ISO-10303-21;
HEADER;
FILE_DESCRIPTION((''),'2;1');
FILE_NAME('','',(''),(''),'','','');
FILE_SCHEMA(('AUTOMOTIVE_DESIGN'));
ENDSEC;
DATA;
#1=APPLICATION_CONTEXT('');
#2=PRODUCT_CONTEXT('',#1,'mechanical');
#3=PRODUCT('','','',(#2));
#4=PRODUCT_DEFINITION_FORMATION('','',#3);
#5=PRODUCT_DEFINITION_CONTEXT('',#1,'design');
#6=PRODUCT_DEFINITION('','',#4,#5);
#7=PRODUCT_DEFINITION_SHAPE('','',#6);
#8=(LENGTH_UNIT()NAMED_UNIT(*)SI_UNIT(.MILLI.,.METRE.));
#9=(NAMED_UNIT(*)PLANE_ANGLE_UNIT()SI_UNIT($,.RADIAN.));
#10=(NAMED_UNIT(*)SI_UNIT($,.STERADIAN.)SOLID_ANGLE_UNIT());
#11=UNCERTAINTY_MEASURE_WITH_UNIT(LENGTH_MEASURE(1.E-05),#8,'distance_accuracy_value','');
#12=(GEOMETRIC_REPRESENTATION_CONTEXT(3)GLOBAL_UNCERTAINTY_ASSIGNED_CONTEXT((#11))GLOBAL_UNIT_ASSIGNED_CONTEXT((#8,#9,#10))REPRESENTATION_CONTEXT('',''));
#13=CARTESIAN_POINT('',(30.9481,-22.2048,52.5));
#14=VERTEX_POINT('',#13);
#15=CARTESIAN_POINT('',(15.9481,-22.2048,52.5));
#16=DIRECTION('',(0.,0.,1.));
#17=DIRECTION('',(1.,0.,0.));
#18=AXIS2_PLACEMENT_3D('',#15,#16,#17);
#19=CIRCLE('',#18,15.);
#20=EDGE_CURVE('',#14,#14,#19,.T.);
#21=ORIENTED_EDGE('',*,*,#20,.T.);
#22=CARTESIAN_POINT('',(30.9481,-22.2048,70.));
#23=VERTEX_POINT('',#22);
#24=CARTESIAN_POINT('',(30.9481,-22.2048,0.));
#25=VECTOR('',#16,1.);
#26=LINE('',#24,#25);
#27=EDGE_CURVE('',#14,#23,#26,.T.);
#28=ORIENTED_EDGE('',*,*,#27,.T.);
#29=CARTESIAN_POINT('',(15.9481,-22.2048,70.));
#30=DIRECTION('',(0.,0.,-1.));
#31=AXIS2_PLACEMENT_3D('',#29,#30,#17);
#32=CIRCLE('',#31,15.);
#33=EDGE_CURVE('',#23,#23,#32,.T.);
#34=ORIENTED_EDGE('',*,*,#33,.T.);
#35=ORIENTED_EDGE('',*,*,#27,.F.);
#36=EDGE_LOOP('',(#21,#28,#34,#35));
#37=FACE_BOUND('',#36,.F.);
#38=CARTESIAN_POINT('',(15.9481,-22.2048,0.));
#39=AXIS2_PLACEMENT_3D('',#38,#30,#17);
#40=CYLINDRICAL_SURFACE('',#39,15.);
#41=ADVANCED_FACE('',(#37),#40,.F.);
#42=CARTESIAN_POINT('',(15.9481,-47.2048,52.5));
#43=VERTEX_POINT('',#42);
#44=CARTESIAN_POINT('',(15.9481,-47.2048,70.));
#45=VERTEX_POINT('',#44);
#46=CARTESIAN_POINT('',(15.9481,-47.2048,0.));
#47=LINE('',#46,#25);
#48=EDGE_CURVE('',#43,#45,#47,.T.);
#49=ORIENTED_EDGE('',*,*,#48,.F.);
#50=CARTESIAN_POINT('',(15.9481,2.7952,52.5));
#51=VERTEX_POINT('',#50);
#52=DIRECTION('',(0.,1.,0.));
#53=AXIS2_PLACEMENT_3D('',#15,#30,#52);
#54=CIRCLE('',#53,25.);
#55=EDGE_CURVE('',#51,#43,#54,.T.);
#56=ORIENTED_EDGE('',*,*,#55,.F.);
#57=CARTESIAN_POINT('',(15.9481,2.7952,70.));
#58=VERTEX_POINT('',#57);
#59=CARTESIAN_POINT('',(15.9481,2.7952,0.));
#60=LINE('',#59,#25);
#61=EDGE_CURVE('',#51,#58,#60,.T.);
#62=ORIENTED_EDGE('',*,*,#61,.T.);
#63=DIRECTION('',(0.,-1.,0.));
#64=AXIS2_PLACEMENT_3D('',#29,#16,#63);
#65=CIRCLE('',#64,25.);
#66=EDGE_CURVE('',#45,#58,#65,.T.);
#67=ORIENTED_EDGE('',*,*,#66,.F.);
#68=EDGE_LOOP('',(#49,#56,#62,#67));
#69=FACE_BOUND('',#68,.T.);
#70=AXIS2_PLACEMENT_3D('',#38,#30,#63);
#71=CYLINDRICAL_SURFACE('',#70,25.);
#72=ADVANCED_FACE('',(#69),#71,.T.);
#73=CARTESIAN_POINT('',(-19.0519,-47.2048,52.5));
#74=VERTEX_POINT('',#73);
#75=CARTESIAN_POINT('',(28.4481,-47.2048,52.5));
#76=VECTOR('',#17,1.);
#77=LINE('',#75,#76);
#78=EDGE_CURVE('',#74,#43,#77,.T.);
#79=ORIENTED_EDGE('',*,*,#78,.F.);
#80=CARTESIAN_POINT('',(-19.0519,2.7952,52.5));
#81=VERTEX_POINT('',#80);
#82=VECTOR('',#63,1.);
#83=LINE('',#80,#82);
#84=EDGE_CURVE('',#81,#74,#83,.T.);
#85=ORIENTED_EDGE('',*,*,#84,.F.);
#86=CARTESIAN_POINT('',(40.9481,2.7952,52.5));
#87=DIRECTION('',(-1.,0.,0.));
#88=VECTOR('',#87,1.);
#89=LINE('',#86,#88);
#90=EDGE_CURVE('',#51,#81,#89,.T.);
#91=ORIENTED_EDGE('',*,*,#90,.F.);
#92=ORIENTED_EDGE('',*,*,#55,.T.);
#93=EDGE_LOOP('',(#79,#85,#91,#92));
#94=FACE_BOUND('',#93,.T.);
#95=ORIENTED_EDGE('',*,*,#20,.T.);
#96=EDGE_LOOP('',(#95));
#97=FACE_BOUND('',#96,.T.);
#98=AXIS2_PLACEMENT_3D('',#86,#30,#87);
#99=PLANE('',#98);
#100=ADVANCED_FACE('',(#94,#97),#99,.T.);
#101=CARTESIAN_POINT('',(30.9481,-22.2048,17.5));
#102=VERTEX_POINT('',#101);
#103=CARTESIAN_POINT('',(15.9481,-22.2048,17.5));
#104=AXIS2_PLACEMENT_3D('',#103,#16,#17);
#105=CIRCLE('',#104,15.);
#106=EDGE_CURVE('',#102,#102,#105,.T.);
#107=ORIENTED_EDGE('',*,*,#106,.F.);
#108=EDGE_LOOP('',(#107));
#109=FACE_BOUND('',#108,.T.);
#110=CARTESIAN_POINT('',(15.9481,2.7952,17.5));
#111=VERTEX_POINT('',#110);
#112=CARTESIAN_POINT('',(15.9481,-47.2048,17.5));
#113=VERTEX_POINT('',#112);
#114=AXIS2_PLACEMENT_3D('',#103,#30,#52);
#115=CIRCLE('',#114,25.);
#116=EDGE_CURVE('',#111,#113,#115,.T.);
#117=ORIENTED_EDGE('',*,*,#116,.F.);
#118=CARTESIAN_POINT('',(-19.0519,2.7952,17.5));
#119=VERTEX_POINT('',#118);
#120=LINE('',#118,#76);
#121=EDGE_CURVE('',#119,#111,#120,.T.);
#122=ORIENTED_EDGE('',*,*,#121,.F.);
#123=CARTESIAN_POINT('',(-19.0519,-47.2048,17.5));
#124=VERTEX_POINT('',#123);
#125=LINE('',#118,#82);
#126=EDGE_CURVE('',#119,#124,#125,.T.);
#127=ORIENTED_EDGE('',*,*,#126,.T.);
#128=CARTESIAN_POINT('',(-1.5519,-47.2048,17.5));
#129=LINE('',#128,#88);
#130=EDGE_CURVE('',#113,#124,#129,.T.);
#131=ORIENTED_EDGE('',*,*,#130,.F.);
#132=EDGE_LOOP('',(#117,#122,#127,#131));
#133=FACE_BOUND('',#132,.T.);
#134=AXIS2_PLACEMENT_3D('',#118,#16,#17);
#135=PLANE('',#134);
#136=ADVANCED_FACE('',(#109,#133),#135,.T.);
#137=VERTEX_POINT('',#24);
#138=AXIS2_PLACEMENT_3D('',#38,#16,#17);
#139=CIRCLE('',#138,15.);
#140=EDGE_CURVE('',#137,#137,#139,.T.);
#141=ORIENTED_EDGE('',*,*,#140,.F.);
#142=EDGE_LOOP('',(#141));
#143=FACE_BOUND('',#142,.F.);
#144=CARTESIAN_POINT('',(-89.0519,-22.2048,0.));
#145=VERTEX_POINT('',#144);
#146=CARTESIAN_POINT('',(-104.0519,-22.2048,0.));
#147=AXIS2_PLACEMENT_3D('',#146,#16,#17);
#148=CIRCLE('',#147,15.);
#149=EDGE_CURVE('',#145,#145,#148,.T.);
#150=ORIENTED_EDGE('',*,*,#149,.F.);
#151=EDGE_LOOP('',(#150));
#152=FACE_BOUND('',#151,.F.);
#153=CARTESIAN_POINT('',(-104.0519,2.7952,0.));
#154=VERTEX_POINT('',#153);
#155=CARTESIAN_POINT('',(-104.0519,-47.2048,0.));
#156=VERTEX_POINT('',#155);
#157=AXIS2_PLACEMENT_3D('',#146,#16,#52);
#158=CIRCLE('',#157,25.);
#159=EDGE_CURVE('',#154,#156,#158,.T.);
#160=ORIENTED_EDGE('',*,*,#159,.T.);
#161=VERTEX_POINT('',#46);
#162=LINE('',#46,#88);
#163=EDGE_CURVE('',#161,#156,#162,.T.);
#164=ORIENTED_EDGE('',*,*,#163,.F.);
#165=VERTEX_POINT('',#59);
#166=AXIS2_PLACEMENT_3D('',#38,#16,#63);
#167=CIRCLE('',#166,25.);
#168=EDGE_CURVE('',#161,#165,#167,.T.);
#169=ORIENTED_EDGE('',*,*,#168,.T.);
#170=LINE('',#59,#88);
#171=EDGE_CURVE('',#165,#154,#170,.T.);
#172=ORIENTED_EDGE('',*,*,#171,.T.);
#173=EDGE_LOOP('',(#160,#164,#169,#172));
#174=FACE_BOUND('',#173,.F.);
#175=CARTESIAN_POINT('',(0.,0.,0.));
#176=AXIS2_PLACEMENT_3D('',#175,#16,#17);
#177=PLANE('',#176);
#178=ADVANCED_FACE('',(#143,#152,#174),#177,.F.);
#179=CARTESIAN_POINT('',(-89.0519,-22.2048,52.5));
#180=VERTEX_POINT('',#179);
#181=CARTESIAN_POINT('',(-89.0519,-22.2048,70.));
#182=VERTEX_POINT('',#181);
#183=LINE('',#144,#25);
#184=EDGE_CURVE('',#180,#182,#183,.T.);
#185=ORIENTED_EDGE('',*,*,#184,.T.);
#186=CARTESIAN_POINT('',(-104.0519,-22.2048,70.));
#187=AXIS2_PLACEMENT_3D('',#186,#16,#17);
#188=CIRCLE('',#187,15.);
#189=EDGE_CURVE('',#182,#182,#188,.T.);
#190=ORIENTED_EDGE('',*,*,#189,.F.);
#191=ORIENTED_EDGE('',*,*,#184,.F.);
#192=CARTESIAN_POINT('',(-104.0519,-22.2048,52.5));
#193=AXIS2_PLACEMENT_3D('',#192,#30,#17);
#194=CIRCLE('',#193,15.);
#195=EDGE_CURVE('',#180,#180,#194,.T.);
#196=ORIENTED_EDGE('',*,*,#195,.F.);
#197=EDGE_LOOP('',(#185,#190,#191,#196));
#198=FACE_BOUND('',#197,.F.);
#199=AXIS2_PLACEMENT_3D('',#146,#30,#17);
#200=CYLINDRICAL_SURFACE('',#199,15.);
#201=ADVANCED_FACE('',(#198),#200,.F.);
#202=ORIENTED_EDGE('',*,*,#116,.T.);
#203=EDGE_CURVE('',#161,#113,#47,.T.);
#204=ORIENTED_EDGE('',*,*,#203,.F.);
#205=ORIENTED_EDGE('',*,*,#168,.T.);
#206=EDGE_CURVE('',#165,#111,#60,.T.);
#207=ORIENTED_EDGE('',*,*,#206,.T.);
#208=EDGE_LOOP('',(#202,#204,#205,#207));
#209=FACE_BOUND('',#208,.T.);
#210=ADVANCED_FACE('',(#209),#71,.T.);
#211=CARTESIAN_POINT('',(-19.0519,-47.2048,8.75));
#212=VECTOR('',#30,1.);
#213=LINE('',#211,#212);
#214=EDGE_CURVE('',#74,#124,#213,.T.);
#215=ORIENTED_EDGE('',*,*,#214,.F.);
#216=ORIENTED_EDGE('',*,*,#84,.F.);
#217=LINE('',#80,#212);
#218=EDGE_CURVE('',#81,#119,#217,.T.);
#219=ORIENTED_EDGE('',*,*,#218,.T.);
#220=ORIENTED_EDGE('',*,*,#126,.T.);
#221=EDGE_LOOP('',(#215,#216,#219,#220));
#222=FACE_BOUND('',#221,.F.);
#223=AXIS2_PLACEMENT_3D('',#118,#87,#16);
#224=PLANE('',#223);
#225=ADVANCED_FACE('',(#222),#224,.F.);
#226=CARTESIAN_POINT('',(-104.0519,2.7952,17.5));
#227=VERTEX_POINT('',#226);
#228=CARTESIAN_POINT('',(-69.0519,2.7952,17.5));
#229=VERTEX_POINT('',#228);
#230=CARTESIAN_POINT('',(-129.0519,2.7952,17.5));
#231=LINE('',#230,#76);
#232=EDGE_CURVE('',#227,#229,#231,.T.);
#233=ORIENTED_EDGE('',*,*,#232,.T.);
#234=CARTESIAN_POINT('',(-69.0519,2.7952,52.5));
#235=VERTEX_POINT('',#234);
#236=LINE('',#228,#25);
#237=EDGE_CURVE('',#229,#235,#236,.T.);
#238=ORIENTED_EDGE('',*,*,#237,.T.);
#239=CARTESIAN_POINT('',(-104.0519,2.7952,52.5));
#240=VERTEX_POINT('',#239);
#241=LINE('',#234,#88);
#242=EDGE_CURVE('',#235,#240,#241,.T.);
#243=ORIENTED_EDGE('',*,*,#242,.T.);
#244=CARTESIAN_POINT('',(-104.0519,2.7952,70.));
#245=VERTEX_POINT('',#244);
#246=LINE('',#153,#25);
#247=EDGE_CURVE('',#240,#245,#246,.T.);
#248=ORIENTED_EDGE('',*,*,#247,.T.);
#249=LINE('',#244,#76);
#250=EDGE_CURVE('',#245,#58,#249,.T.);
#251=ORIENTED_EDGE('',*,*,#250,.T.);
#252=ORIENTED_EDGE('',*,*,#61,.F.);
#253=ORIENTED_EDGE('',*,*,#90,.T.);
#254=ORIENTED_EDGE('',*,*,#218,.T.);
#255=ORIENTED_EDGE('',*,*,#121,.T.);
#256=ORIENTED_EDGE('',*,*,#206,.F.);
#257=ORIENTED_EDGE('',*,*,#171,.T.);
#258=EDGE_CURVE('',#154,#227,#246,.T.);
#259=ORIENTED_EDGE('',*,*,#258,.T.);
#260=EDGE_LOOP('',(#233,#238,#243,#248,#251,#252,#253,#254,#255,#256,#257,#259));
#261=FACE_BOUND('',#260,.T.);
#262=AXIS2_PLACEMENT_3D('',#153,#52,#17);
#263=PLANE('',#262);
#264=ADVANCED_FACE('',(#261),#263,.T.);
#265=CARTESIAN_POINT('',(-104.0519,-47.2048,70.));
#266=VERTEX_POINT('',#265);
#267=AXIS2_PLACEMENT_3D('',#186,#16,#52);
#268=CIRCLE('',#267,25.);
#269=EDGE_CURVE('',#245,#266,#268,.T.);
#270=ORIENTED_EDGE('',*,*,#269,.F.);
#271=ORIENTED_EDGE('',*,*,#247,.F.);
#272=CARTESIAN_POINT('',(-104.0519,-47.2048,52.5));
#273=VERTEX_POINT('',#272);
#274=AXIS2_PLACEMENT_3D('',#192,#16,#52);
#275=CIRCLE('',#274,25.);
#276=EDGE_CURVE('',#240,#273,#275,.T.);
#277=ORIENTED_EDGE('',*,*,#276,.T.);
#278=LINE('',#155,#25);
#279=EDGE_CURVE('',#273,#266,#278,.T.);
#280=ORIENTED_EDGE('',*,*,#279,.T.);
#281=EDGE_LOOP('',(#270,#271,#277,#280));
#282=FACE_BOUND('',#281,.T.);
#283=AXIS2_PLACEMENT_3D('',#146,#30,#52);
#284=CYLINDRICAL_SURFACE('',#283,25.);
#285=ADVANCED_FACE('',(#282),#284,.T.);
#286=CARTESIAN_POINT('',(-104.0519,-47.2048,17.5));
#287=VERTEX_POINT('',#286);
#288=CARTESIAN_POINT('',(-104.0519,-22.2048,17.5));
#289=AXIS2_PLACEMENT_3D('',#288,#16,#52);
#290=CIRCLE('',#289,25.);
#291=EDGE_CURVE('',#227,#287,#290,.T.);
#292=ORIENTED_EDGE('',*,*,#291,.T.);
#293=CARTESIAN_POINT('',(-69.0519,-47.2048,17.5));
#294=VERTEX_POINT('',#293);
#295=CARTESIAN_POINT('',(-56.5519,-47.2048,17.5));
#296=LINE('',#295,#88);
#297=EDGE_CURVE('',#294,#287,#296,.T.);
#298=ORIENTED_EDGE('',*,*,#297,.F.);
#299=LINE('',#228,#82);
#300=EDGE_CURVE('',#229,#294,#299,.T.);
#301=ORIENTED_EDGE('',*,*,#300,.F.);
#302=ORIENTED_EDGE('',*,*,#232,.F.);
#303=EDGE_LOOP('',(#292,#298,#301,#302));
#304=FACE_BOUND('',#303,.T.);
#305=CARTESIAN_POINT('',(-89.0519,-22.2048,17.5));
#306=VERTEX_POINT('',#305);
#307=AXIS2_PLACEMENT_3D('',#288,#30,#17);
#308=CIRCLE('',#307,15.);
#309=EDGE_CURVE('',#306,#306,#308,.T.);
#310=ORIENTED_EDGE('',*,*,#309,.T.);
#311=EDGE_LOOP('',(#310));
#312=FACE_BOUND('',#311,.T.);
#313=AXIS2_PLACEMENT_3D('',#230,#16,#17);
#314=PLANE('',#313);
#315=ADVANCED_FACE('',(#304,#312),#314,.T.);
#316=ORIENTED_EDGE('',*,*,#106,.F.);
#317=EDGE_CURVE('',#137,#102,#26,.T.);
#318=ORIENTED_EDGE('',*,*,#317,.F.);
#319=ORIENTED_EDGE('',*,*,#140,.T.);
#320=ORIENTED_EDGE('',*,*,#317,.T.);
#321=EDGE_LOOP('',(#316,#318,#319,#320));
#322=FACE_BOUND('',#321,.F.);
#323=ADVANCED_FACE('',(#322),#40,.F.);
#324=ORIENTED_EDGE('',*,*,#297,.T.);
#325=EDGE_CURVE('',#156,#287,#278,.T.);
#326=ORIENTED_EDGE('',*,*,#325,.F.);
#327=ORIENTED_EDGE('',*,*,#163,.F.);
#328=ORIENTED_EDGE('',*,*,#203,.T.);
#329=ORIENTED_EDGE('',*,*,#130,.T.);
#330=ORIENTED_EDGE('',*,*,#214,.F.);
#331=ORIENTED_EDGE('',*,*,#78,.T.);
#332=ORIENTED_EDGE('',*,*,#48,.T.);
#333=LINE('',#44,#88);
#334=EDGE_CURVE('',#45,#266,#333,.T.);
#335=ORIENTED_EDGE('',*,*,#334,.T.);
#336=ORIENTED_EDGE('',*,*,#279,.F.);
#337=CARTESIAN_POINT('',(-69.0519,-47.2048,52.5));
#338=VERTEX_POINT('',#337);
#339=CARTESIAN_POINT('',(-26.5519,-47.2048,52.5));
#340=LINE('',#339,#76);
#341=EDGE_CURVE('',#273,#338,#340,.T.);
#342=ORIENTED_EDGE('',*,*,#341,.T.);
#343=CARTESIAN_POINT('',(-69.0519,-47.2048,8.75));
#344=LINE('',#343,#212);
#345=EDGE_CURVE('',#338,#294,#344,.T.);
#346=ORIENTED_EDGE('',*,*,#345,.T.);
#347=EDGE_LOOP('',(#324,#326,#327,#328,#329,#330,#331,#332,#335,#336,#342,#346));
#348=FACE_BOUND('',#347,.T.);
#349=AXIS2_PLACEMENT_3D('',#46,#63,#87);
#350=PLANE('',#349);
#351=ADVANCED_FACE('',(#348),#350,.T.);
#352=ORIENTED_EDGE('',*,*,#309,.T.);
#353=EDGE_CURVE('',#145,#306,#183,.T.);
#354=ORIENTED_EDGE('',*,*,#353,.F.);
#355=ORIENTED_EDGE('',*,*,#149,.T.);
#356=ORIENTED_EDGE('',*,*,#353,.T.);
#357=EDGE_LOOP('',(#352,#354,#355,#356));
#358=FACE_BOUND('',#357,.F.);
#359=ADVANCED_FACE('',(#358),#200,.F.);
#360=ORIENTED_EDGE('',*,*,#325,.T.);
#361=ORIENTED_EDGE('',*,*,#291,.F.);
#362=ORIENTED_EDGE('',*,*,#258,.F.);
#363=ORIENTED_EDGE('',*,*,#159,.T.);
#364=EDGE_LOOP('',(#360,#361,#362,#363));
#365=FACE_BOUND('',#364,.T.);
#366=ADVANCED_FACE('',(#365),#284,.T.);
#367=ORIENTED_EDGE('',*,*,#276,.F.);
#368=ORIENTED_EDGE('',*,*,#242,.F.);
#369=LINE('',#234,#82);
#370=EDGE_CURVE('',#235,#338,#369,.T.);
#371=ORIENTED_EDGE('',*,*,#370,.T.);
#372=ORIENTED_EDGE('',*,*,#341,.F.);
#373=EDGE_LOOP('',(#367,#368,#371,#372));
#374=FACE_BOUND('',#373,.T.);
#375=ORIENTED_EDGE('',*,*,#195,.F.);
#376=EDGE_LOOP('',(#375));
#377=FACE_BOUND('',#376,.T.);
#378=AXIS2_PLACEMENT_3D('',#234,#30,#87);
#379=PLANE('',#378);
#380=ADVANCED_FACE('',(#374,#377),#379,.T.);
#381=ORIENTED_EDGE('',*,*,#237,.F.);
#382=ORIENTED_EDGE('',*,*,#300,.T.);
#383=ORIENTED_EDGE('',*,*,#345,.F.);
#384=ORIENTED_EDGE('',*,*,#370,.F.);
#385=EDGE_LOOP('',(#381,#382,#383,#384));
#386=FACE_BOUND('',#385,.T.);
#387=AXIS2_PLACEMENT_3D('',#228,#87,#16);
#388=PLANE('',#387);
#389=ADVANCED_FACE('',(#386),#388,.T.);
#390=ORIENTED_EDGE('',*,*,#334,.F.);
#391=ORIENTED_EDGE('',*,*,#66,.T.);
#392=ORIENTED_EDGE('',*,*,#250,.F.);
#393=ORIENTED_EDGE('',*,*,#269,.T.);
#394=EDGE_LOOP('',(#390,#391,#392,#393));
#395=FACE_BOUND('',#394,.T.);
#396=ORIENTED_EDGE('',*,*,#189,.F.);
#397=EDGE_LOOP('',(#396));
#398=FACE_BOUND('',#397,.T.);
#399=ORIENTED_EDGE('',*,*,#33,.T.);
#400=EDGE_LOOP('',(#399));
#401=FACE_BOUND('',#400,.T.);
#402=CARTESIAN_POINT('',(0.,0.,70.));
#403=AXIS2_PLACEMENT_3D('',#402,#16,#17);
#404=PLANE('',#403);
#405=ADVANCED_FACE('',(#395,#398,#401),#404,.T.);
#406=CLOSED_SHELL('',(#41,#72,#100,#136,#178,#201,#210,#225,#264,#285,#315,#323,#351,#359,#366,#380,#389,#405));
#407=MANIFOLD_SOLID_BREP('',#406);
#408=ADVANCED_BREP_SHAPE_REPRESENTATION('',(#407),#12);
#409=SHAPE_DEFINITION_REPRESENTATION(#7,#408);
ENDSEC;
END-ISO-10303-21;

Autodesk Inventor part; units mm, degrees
ref_plane "YZ Plane" through (0, 0, 0) normal (1, 0, 0) x (0, 1, 0)
ref_plane "XZ Plane" through (0, 0, 0) normal (0, 1, 0) x (-1, 0, 0)
ref_plane "XY Plane" through (0, 0, 0) normal (0, 0, 1) x (1, 0, 0)
sketch "草图1" plane through (0, 0, 0) normal (0, 0, 1) x (1, 0, 0)
  line L0 (-44.0519, -22.2048) -> (24.7481, -22.2048)
  line L1 (-44.0519, -22.2048) -> (-44.0519, 41.5952)
  line L2 (-104.0519, 2.7952) -> (15.9481, 2.7952)
  line L3 (15.9481, -47.2048) -> (-104.0519, -47.2048)
  line L4 (-104.0519, 2.7952) -> (15.9481, -47.2048) construction
  line L5 (15.9481, 2.7952) -> (-104.0519, -47.2048) construction
  arc A0 (15.9481, -47.2048) -> (15.9481, 2.7952) centre (15.9481, -22.2048) ccw
  arc A1 (-104.0519, 2.7952) -> (-104.0519, -47.2048) centre (-104.0519, -22.2048) ccw
  circle A2 centre (-104.0519, -22.2048) radius 15
  circle A3 centre (15.9481, -22.2048) radius 15
  dimension "d2" = 25
  dimension "d3" = 50
  dimension "d4" = 120
  dimension "d7" = 30
  dimension "d8" = 30
  dimension "d14" = 50
extrude "拉伸1" add sketch "草图1" along normal blind 70
sketch "草图2" plane through (-104.0519, 2.7952, 0) normal (0, 1, 0) x (1, 0, 0)
  line L0 (0, 0) -> (120, 0) projected
  line L1 (60, 0) -> (60, -70)
  line L2 (120, -70) -> (0, -70) projected
  line L3 (-25, 0) -> (-25, -70) projected
  line L4 (-25, -35) -> (145, -35)
  line L5 (145, 0) -> (145, -70) projected
  line L6 (145, -17.5) -> (145, -52.5)
  line L7 (-25, -52.5) -> (-25, -17.5)
  line L8 (-25, -17.5) -> (145, -52.5) construction
  line L9 (145, -17.5) -> (-25, -52.5) construction
  line L10 (35, -17.5) -> (35, -52.5)
  line L11 (85, -17.5) -> (85, -52.5)
  line L12 (145, -52.5) -> (85, -52.5)
  line L13 (35, -52.5) -> (-25, -52.5)
  line L14 (-25, -17.5) -> (35, -17.5)
  line L15 (85, -17.5) -> (145, -17.5)
  point P0 (104.0519, 0)
  point P1 (60, -35)
  dimension "d10" = 60
  dimension "d11" = 60
  dimension "d15" = 35
  dimension "d16" = 17.5
  dimension "d17" = 35
extrude "拉伸2" cut sketch "草图2" against normal blind 70
properties part number "ConnectBoard" material "钢，高强度，低合金"
